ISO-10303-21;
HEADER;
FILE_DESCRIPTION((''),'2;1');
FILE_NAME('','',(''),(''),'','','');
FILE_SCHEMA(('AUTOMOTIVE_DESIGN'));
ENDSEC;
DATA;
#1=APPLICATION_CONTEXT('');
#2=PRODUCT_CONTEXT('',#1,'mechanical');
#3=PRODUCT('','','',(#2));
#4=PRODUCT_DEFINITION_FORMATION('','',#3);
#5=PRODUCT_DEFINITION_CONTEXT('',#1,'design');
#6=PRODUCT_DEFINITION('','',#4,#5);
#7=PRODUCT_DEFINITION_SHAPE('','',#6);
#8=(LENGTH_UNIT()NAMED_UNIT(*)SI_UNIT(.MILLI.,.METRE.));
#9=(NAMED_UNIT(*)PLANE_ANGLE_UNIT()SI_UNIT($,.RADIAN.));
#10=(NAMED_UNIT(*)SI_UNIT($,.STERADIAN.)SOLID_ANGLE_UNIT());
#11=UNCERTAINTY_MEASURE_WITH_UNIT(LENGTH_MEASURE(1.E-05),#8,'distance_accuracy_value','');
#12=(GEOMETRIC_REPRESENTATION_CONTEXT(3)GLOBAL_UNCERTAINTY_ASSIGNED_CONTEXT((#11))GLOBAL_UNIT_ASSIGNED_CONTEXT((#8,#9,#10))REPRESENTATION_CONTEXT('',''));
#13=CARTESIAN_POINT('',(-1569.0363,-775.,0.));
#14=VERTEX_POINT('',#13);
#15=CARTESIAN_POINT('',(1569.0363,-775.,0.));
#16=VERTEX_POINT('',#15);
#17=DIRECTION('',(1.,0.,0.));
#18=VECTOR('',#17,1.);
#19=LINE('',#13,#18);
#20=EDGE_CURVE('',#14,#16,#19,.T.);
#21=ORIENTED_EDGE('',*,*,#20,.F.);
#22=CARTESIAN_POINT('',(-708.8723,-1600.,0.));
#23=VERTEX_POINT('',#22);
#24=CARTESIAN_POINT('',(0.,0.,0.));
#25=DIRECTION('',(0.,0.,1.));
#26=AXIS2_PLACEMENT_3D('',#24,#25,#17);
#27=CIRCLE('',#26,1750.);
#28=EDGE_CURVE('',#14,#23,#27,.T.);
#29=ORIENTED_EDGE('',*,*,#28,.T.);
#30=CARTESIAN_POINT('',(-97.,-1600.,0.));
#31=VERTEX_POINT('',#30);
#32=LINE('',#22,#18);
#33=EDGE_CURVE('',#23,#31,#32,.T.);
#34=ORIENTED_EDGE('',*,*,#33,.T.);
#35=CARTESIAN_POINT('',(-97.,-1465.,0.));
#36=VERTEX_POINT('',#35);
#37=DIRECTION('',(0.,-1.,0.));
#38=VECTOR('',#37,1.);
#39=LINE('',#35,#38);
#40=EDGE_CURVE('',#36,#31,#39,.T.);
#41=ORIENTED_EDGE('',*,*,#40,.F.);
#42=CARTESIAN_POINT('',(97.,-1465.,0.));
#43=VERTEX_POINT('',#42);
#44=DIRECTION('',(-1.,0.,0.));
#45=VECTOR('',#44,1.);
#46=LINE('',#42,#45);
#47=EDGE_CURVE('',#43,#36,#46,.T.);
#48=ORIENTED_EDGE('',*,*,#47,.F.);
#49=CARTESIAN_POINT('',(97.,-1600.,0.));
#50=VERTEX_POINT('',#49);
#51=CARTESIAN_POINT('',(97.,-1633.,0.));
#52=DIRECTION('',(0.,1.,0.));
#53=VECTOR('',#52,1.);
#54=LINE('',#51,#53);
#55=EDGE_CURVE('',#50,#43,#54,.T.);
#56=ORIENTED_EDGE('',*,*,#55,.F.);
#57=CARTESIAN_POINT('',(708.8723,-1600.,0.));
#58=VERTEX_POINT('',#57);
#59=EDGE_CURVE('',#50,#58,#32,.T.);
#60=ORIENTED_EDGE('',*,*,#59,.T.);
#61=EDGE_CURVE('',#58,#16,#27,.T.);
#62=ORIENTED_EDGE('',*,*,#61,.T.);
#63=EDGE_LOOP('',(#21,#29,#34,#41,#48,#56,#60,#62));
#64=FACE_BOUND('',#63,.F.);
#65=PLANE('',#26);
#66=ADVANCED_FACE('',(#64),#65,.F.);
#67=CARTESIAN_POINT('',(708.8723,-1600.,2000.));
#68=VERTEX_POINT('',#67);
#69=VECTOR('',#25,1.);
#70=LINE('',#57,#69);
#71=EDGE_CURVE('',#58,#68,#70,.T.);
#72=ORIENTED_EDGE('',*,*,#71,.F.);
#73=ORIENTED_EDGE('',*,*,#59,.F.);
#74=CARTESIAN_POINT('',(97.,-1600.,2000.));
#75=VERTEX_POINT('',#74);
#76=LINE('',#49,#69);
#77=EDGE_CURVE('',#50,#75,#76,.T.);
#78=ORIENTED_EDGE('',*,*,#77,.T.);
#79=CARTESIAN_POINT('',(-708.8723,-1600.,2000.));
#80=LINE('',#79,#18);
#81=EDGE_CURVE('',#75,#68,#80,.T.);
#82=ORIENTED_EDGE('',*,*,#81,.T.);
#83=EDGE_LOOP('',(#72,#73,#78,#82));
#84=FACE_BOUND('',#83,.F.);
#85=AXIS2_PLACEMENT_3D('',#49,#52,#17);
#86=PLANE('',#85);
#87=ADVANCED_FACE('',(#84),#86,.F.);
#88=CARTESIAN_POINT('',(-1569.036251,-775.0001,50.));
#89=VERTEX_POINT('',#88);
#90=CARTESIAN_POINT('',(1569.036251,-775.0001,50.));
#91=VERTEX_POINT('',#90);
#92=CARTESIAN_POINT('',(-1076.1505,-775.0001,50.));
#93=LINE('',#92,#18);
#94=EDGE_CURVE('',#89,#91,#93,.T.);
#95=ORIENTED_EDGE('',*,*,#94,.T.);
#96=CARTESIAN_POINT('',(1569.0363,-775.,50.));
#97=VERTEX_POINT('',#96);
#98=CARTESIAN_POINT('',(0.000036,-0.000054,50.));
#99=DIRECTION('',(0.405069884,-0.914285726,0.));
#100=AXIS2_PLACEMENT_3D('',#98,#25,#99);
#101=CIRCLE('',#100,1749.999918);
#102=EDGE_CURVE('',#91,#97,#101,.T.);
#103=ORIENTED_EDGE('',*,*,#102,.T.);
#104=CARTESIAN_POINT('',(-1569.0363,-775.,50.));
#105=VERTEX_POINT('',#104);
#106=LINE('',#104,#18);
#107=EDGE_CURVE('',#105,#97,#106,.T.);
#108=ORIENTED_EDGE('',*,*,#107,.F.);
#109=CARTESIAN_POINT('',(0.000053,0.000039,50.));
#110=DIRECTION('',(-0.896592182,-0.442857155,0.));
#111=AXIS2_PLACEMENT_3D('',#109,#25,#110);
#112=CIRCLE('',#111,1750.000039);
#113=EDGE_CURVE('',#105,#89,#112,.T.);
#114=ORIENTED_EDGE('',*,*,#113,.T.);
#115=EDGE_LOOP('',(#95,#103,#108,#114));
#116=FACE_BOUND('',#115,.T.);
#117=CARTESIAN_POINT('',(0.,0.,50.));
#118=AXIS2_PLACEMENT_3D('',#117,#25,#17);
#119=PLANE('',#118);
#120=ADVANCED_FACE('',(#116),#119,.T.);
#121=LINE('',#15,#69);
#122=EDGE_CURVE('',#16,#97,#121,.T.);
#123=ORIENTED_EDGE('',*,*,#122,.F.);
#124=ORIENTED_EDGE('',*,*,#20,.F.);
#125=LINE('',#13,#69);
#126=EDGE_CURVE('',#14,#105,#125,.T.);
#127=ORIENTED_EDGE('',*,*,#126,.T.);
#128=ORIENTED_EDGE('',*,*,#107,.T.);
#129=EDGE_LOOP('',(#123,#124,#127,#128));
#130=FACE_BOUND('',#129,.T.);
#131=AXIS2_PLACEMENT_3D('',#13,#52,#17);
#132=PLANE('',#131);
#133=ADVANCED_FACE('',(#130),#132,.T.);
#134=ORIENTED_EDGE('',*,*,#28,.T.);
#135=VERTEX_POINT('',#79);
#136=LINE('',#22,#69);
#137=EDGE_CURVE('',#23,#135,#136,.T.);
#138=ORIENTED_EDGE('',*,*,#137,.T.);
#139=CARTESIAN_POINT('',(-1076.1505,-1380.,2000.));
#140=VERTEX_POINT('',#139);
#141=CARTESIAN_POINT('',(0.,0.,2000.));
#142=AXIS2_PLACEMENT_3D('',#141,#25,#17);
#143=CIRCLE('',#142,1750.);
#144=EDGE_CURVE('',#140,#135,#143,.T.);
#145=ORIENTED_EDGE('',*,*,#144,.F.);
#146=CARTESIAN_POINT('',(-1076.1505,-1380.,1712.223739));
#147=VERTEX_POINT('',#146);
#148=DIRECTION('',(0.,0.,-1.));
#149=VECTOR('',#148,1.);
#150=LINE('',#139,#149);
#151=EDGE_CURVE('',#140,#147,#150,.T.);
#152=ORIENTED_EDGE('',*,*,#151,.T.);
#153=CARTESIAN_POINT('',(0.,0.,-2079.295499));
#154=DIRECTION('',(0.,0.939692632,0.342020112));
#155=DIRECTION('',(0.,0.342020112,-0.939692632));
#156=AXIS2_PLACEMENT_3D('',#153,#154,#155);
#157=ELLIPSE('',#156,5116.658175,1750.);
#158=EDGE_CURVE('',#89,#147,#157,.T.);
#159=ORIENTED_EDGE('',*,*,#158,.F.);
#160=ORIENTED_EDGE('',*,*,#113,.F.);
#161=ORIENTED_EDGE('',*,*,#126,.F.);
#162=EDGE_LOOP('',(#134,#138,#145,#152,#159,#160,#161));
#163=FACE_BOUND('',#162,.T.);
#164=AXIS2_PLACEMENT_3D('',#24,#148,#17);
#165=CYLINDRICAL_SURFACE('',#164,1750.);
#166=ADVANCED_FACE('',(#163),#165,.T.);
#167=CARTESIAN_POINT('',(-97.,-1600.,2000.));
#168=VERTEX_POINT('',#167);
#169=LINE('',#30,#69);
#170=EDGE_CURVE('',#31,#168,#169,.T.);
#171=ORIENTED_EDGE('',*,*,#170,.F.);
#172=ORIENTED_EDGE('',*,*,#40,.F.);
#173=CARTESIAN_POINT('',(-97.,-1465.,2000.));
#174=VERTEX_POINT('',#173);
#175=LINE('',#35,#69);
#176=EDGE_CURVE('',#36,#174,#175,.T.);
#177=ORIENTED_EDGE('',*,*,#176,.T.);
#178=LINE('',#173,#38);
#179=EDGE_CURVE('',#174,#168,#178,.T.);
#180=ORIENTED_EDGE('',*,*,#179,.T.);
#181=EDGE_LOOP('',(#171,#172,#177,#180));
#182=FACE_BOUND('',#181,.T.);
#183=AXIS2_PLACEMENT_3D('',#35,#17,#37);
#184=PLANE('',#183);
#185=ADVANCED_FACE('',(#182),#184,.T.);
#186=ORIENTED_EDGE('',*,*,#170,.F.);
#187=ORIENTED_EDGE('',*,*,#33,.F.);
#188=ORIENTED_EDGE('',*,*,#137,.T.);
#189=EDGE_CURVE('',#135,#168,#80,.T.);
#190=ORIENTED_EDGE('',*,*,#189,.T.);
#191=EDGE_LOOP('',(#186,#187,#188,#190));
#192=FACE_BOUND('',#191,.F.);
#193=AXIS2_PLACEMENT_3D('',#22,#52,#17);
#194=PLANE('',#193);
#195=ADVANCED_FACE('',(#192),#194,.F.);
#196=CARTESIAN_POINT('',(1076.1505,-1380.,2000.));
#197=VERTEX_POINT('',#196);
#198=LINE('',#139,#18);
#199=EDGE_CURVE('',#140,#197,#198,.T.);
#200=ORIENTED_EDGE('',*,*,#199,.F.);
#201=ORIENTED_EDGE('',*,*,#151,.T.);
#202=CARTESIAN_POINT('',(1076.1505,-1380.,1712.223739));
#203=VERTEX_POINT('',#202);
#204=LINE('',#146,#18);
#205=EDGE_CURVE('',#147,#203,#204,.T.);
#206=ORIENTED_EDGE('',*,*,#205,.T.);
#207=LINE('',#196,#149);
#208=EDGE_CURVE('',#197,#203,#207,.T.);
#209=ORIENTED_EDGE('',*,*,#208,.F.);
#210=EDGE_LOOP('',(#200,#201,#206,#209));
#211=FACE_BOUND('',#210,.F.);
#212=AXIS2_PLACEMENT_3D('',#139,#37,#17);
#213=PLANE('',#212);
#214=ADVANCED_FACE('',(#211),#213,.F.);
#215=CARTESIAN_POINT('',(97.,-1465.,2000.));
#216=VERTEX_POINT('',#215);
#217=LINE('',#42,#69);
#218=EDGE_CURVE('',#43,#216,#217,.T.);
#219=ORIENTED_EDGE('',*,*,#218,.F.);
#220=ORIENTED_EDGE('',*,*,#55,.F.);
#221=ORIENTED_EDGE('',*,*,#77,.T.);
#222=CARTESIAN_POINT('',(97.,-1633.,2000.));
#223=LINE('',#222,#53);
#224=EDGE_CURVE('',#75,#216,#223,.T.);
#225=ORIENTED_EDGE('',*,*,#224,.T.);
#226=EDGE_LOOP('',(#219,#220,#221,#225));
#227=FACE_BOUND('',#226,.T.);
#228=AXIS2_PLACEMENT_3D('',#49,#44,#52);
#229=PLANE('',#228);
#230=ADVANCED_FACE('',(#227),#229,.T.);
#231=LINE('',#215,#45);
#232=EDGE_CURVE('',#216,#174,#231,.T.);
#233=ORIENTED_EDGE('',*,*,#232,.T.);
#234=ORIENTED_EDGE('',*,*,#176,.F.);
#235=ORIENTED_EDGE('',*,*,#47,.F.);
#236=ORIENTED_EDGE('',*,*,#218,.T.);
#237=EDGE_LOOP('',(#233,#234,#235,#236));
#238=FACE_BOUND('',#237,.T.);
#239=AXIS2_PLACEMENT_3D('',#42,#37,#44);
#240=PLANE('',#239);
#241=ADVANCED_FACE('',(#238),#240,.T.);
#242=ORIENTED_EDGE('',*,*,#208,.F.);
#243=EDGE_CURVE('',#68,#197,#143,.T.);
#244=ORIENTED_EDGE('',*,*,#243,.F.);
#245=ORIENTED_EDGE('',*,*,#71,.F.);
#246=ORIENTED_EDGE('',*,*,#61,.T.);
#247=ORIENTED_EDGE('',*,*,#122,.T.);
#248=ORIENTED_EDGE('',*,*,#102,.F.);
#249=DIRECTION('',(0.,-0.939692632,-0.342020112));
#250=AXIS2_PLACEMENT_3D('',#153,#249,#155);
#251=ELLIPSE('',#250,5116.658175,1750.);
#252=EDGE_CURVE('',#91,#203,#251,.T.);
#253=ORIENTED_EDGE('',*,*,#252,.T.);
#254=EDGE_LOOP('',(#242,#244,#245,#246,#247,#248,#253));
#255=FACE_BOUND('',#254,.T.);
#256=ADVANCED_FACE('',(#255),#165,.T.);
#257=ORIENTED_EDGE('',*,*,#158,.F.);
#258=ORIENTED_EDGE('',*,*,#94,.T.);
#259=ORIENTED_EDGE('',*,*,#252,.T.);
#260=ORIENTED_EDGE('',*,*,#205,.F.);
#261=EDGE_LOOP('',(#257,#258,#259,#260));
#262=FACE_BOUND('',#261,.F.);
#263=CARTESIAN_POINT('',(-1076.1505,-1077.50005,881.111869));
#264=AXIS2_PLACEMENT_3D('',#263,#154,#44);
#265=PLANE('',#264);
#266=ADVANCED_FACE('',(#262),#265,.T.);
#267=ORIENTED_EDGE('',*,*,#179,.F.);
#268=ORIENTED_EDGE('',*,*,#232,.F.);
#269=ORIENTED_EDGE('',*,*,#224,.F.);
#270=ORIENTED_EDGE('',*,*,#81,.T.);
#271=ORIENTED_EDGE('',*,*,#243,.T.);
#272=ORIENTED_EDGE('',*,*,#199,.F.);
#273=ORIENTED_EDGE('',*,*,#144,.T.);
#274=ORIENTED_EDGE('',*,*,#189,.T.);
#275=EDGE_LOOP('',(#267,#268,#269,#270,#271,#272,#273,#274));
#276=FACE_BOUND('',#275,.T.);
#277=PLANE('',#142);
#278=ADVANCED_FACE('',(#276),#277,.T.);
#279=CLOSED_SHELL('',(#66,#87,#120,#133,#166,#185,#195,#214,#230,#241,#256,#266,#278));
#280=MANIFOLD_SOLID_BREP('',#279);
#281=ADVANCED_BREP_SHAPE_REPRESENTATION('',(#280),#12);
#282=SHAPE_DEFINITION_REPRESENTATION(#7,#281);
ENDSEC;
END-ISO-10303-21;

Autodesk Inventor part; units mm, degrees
ref_plane "YZ Plane" through (0, 0, 0) normal (1, 0, 0) x (0, 1, 0)
ref_plane "XZ Plane" through (0, 0, 0) normal (0, 1, 0) x (-1, 0, 0)
ref_plane "XY Plane" through (0, 0, 0) normal (0, 0, 1) x (1, 0, 0)
sketch "Sketch1" plane through (0, 0, 0) normal (0, 0, 1) x (1, 0, 0)
  circle A0 centre (0, 0) radius 1750
  line L0 (-1569.0363, -775) -> (1569.0363, -775)
  line L1 (-64, -1498) -> (64, -1498)
  line L2 (64, -1498) -> (64, -1600)
  line L3 (64, -1600) -> (-64, -1600)
  line L4 (-64, -1600) -> (-64, -1498)
  line L5 (-64, -1498) -> (64, -1600) construction
  line L6 (64, -1498) -> (-64, -1600) construction
  line L7 (97, -1633) -> (97, -1465)
  line L8 (97, -1465) -> (-97, -1465)
  line L9 (-97, -1465) -> (-97, -1633)
  line L10 (-97, -1633) -> (97, -1465) construction
  line L11 (97, -1633) -> (-97, -1465) construction
  line L12 (-708.8723, -1600) -> (708.8723, -1600)
  point P0 (0, -1549)
  point P1 (0, -1549)
  point P2 (97, -1600)
  point P3 (-97, -1600)
  dimension "d10" = 3500
  dimension "d12" = 33
  dimension "d13" = 33
  dimension "d14" = 102
  dimension "d15" = 128
  dimension "d16" = 1600
  dimension "d17" = 825
extrude "Extrusion1" add sketch "Sketch1" along normal blind 2000 contours L0 A0 L12 L7 L8 L9
sketch "Sketch3" plane through (0, 0, 2000) normal (0, 0, 1) x (1, 0, 0)
  arc A0 (-1569.0363, -775) -> (-708.8723, -1600) centre (0, 0) ccw projected
  line L0 (-708.8723, -1600) -> (-97, -1600) projected
  line L1 (-97, -1600) -> (-97, -1465) projected
  line L2 (-97, -1465) -> (97, -1465) projected
  line L3 (97, -1600) -> (708.8723, -1600) projected
  arc A1 (708.8723, -1600) -> (1569.0363, -775) centre (0, 0) ccw projected
  arc A2 (-1569.0363, -775) -> (-708.8723, -1600) centre (0, 0) ccw projected
  arc A3 (708.8723, -1600) -> (1569.0363, -775) centre (0, 0) ccw projected
  line L4 (-1569.0363, -775) -> (1569.0363, -775)
  line L5 (-1076.1505, -1380) -> (1076.1505, -1380)
  dimension "d35" = 605
extrude "Extrusion3" cut sketch "Sketch3" against normal blind 1950
chamfer "Chamfer1" distance 605 angle 70 1 edges at (0, -1380, 50) measured on face at (-341.0533, -1009.7104, 50)
properties part number "SlopeFloor"
